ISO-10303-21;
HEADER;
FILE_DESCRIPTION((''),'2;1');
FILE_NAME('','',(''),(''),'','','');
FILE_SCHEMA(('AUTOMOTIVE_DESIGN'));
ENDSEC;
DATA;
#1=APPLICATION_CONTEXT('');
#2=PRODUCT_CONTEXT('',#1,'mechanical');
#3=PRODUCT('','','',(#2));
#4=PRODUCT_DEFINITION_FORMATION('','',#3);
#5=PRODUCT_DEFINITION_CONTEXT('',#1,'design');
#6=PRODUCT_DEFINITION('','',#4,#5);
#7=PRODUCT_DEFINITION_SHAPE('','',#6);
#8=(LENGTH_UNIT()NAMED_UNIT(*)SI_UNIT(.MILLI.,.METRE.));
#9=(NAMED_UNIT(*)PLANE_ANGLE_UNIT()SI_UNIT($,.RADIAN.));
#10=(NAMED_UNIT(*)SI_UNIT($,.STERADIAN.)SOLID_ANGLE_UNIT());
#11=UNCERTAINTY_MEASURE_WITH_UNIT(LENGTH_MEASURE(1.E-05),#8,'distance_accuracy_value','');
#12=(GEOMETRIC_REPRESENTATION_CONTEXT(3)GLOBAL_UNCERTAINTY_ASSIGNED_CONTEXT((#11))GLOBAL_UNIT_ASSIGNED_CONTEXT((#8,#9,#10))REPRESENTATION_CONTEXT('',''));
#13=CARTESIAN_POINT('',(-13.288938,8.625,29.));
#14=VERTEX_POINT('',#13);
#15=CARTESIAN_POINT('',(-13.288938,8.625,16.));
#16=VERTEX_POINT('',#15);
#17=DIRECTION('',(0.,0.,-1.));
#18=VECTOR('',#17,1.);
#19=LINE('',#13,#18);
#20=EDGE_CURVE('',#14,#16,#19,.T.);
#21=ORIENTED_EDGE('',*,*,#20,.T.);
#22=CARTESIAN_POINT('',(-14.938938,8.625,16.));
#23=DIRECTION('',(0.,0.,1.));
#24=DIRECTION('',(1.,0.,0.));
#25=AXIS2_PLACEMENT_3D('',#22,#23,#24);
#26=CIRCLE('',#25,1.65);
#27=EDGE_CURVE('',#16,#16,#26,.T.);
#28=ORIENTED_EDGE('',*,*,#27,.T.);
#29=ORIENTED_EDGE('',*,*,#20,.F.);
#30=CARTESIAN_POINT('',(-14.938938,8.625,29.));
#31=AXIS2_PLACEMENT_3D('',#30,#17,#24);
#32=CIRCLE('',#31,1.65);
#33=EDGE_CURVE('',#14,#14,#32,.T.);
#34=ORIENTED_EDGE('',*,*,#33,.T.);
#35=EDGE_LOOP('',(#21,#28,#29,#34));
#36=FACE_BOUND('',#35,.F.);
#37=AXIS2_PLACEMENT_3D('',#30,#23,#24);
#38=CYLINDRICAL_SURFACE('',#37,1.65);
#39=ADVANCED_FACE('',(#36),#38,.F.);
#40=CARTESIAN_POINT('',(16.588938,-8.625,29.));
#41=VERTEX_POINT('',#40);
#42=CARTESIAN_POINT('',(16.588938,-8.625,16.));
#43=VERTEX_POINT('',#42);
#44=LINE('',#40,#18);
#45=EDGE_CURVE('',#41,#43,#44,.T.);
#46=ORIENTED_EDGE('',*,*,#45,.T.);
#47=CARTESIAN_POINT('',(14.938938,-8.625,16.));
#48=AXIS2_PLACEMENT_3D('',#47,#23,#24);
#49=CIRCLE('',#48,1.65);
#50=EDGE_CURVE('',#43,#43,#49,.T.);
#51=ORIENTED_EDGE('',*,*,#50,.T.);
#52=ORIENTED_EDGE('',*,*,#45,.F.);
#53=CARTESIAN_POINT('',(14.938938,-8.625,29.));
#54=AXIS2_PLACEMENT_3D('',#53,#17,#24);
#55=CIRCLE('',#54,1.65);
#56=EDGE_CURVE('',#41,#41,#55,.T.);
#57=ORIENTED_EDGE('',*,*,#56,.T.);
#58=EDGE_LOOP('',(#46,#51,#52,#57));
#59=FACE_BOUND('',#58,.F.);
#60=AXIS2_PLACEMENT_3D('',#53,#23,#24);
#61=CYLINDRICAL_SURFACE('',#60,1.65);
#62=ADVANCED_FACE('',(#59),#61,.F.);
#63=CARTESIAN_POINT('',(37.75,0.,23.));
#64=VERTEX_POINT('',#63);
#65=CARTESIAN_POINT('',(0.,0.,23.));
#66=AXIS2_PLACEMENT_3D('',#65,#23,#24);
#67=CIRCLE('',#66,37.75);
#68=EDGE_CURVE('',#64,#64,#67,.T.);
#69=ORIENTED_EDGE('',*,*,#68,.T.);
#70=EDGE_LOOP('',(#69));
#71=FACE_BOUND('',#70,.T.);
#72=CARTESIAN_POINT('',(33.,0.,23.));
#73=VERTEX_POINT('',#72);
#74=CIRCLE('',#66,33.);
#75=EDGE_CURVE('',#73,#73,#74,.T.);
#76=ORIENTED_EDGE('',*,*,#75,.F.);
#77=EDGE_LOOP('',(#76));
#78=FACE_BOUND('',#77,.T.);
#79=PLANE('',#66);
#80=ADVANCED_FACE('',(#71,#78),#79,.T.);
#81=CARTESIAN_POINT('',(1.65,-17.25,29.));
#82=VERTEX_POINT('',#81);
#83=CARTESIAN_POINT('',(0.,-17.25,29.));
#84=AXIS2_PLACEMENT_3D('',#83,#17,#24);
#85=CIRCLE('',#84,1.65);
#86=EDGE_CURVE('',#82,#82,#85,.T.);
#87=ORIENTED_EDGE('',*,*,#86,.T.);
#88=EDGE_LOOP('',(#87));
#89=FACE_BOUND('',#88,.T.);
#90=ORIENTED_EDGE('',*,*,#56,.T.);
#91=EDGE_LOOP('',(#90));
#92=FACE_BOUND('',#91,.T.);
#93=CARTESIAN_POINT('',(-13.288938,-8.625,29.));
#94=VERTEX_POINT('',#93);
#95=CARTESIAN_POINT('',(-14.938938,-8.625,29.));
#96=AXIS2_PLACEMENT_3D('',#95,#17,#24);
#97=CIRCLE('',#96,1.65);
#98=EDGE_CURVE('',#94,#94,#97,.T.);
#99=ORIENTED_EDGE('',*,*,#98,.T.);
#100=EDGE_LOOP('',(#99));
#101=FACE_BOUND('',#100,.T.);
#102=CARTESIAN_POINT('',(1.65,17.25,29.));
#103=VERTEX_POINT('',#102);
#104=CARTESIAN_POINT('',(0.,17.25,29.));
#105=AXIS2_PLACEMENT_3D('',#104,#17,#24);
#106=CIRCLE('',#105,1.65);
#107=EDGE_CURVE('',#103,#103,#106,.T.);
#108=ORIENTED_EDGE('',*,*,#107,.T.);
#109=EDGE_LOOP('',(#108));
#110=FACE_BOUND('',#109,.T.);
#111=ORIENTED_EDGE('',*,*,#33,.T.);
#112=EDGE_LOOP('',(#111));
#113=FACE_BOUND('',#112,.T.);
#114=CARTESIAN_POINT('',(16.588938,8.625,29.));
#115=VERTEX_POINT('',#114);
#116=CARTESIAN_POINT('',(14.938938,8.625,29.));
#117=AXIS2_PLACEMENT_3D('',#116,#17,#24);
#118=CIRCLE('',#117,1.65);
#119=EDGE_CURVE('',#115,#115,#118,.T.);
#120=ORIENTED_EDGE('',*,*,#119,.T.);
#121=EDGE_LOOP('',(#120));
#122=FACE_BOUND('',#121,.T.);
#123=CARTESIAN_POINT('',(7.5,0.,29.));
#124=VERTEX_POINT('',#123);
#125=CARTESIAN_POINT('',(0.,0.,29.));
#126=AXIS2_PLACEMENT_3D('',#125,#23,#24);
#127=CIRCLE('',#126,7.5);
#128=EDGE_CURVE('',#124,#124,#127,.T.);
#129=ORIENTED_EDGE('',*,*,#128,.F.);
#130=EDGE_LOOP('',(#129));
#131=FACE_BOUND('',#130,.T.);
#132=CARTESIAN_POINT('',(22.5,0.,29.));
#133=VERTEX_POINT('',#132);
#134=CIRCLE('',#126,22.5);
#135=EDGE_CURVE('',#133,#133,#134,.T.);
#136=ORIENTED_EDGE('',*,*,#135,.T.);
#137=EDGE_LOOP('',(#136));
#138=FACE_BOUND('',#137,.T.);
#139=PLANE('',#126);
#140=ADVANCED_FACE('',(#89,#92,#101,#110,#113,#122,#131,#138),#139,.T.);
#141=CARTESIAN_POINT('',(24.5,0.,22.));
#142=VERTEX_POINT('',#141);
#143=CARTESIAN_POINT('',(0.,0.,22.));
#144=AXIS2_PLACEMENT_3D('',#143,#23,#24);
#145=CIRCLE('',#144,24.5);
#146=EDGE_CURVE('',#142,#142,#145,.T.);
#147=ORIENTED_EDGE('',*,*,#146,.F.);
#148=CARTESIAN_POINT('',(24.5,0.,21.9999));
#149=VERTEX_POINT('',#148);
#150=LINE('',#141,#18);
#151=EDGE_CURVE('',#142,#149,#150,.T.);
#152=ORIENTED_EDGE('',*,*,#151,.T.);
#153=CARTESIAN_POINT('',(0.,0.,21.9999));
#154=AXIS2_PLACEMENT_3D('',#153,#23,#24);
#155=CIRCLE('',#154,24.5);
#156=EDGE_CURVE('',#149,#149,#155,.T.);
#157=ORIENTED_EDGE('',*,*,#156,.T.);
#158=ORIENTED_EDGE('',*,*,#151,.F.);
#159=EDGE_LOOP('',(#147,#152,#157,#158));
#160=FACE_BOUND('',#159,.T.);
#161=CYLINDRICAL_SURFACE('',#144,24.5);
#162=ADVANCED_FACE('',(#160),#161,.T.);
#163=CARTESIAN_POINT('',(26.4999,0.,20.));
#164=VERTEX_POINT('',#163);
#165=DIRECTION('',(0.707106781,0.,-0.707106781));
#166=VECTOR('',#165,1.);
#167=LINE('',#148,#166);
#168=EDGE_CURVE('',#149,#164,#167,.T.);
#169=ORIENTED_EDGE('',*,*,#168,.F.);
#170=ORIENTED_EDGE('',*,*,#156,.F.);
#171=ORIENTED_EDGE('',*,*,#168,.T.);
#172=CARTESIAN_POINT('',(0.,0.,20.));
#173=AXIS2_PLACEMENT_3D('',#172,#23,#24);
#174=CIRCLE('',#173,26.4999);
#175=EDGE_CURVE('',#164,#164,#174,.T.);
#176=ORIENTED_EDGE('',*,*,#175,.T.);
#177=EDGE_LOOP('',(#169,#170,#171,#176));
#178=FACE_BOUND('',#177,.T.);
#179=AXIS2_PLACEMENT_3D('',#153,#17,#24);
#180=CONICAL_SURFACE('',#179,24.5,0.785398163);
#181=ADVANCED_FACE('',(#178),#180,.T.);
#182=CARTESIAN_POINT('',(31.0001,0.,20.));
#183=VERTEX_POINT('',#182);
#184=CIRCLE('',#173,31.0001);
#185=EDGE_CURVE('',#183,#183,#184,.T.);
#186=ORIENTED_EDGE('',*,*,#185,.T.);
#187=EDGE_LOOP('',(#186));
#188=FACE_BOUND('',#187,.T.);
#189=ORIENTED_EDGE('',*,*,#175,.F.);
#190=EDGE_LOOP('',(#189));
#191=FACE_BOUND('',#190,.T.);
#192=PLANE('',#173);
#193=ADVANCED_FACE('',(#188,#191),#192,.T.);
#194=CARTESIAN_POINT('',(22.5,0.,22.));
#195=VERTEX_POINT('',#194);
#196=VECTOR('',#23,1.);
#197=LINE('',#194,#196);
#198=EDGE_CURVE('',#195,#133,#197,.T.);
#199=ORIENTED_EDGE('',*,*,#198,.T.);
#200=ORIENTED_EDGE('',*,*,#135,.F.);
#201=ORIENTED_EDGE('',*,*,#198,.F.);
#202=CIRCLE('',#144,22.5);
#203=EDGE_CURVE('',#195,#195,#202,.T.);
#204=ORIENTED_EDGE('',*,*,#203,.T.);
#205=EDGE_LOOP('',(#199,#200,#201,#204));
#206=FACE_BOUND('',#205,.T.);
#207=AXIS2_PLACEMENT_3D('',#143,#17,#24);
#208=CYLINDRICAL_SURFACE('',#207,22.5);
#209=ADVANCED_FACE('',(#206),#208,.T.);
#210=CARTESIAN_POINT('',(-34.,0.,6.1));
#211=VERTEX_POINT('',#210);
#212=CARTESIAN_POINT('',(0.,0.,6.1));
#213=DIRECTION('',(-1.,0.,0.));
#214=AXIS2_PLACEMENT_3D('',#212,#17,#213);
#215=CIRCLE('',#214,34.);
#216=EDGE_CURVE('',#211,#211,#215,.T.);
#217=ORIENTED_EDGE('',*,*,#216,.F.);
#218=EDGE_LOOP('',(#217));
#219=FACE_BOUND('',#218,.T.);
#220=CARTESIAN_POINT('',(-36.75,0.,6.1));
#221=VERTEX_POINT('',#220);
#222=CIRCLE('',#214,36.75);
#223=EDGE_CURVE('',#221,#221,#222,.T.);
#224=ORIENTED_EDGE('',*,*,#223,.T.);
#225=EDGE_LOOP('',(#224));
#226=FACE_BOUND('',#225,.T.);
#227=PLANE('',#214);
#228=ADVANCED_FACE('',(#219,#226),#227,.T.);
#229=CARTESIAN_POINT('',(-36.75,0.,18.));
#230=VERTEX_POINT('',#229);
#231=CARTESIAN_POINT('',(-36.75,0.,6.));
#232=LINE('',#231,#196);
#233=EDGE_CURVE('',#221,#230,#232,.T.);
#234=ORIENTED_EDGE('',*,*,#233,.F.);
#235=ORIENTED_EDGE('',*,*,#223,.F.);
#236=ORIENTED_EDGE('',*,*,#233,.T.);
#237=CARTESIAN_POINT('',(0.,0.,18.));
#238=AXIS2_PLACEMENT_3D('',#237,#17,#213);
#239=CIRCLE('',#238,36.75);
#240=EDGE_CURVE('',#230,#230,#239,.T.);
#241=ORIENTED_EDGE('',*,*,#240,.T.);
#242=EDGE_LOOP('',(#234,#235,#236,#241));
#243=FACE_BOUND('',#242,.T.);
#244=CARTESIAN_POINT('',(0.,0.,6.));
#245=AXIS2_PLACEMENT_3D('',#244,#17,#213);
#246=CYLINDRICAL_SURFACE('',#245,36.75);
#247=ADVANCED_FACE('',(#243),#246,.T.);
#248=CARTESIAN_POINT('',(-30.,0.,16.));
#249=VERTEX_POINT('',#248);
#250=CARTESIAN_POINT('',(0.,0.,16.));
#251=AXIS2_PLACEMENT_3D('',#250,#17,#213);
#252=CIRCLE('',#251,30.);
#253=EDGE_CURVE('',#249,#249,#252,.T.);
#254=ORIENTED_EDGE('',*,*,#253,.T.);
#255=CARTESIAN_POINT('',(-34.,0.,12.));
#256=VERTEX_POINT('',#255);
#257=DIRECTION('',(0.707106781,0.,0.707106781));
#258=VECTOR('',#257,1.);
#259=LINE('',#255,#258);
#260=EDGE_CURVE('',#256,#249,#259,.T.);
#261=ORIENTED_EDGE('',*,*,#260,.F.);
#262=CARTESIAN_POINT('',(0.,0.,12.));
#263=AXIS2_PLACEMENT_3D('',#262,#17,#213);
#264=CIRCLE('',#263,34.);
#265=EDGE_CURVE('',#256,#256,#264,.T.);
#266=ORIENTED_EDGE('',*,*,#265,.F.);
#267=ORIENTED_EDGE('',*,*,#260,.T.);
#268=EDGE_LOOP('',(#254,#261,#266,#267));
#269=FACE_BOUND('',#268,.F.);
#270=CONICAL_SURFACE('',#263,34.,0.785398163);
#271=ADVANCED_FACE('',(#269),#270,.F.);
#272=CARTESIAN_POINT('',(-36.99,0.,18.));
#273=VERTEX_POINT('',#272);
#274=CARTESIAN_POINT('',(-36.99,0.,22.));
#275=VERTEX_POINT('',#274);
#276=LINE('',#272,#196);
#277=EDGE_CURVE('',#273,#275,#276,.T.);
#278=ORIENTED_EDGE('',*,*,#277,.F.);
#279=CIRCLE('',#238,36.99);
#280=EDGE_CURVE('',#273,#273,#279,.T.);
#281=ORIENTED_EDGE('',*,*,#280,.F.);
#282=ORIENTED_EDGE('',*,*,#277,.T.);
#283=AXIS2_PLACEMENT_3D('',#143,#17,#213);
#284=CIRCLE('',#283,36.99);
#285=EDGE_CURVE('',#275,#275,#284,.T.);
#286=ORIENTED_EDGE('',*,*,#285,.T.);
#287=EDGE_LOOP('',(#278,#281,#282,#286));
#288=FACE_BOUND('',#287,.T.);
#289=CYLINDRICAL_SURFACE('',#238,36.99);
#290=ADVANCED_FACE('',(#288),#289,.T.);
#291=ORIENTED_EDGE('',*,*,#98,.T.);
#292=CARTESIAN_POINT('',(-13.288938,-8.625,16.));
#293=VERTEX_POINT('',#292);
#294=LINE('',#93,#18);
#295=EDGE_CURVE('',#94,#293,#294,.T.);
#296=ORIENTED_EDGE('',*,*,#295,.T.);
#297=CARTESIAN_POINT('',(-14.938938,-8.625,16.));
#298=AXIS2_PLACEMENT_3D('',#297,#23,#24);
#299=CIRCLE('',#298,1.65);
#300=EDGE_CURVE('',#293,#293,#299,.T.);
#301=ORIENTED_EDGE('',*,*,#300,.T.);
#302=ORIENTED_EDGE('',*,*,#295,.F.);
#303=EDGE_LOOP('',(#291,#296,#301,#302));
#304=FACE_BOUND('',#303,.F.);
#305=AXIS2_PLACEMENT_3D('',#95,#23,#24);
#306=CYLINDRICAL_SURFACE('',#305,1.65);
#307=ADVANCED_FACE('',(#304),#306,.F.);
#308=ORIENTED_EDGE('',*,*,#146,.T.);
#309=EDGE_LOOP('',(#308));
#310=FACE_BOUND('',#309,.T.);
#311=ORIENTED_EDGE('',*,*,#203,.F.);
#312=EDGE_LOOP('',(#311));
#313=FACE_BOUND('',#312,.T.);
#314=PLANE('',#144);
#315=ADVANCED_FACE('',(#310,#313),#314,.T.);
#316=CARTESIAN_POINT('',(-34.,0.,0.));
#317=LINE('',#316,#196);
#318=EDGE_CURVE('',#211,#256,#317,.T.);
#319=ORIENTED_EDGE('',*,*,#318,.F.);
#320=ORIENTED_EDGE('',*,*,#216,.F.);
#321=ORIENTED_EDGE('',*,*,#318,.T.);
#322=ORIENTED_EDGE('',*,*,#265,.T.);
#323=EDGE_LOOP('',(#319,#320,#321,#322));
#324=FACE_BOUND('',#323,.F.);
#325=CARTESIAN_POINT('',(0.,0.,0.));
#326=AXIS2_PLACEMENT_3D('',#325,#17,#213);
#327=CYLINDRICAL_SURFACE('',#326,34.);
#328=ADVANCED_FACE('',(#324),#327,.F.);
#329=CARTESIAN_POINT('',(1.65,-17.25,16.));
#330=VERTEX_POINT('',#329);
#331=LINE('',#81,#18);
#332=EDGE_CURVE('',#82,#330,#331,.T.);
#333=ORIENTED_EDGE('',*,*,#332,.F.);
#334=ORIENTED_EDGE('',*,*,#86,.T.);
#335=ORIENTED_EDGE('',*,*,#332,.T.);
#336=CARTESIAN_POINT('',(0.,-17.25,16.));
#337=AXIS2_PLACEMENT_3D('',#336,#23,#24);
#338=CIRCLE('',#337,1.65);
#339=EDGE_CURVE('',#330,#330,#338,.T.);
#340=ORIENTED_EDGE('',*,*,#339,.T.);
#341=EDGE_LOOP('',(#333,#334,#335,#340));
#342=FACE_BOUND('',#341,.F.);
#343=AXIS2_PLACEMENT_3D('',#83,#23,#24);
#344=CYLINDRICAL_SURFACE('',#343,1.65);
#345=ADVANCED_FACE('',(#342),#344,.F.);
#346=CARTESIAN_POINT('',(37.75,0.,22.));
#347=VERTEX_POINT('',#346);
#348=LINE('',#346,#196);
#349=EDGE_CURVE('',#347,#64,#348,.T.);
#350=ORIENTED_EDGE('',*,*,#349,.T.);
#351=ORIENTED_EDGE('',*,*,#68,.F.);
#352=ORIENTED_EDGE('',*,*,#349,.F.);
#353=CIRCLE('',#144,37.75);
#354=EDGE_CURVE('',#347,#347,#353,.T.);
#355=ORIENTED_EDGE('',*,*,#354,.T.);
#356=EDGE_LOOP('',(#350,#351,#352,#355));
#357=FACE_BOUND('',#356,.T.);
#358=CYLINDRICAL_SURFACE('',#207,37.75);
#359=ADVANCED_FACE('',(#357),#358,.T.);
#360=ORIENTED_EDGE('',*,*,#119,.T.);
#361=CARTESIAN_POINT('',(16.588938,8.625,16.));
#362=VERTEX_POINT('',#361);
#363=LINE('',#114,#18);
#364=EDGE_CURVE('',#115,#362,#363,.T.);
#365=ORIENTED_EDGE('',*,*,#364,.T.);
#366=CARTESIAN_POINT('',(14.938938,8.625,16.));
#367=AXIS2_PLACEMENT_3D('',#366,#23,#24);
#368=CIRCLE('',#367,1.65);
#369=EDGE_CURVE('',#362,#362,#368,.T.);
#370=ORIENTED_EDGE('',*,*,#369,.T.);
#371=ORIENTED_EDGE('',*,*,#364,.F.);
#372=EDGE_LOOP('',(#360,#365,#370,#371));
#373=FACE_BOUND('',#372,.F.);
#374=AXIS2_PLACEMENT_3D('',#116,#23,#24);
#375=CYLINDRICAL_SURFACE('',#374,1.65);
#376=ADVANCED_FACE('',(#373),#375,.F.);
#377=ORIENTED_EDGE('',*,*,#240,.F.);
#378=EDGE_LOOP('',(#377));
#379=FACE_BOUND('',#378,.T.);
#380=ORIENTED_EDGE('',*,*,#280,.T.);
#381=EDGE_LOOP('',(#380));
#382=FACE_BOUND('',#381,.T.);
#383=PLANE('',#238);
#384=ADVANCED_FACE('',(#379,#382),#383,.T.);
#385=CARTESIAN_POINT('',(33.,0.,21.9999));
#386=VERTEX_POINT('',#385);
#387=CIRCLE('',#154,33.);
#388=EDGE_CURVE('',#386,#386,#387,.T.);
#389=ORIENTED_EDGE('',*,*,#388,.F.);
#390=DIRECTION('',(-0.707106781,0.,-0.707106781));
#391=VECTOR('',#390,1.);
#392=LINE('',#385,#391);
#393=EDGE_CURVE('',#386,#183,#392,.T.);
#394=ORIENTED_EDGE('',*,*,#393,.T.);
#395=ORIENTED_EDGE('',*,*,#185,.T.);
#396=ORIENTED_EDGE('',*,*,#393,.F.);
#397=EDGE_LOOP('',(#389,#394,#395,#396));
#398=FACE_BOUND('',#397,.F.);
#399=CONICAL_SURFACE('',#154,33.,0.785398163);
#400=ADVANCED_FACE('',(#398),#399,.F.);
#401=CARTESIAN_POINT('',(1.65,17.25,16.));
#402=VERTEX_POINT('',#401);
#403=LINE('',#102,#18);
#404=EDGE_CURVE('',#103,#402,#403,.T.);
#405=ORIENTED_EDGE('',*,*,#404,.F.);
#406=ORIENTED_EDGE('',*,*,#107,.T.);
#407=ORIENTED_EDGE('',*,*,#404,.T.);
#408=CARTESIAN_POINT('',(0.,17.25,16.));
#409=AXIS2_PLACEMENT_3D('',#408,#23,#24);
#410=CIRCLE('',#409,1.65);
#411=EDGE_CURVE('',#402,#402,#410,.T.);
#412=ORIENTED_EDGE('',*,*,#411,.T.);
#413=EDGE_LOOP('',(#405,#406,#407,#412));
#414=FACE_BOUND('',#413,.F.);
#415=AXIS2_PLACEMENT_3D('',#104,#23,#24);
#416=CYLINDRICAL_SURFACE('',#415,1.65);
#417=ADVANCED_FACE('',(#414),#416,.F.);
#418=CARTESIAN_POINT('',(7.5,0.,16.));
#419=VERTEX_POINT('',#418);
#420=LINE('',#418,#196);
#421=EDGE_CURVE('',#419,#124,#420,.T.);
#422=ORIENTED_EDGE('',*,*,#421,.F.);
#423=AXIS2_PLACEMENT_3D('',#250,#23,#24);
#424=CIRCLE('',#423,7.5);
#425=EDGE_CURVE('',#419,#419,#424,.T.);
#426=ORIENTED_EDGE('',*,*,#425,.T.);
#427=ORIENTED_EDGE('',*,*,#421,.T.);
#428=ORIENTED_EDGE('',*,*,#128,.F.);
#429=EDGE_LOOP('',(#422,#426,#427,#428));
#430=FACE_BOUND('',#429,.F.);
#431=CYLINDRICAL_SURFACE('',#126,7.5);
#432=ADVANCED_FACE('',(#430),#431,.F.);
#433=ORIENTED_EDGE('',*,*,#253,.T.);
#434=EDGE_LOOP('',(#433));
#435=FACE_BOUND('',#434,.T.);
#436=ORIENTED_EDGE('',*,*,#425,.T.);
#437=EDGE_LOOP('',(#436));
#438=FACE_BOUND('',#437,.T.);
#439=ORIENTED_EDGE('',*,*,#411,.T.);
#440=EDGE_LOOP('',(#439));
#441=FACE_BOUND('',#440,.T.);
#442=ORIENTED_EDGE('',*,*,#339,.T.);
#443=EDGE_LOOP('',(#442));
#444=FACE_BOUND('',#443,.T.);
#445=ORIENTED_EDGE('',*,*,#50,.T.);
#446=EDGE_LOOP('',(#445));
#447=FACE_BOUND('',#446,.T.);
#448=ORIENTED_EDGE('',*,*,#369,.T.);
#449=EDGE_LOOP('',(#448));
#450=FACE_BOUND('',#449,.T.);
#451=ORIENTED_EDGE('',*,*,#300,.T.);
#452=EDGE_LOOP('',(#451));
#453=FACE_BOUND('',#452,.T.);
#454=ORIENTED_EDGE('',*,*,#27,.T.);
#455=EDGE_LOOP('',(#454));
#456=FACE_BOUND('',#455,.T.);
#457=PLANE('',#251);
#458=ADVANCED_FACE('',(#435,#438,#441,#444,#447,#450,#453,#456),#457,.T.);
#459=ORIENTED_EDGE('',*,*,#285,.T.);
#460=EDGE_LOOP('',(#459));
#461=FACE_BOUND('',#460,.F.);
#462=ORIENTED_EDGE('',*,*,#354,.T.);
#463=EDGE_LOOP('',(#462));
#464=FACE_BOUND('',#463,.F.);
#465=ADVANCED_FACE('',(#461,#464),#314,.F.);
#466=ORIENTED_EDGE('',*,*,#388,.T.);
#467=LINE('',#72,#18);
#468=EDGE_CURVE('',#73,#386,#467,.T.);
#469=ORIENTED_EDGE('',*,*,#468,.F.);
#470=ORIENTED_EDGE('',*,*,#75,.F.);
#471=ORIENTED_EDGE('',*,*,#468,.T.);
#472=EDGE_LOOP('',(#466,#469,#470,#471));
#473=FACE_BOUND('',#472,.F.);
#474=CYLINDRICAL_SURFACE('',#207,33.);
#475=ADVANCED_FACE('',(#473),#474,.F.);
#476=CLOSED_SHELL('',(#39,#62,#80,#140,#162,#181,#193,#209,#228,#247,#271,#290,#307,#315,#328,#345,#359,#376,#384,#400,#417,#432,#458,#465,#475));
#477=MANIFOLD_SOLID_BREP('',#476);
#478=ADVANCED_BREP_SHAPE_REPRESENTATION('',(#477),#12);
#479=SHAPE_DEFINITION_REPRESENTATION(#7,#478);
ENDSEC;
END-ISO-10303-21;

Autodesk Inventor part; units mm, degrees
ref_plane "YZ Plane" through (0, 0, 0) normal (1, 0, 0) x (0, 1, 0)
ref_plane "XZ Plane" through (0, 0, 0) normal (0, 1, 0) x (-1, 0, 0)
ref_plane "XY Plane" through (0, 0, 0) normal (0, 0, 1) x (1, 0, 0)
sketch "Sketch1" plane through (0, 0, 0) normal (0, 0, 1) x (1, 0, 0)
  circle A0 centre (0, 0) radius 37
  dimension "d0" = 74
extrude "Extrusion1" add sketch "Sketch1" along normal blind 22
sketch "Sketch2" plane through (0, 0, 22) normal (0, 0, 1) x (1, 0, 0)
  circle A0 centre (0, 0) radius 22.5
  dimension "d19" = 45
extrude "Extrusion2" add sketch "Sketch2" along normal blind 7
sketch "Sketch7" plane through (0, 0, 22) normal (0, 0, 1) x (1, 0, 0)
  circle A0 centre (0, 0) radius 22.5 projected
  circle A1 centre (0, 0) radius 24.5
  circle A2 centre (0, 0) radius 37 projected
  circle A3 centre (0, 0) radius 33
  dimension "d12" = 2
  dimension "d13" = 4
extrude "Extrusion5" cut sketch "Sketch7" against normal blind 2 contours A3
sketch "Sketch8" plane through (0, 0, 0) normal (0, 0, -1) x (-1, 0, 0)
  circle A0 centre (0, 0) radius 34
  circle A1 centre (0, 0) radius 37 projected
  dimension "d16" = 3
extrude "Extrusion6" cut sketch "Sketch8" against normal blind 16 contours A0
sketch "Sketch9" plane through (0, 0, 29) normal (0, 0, 1) x (1, 0, 0)
  circle A0 centre (0, 0) radius 7.5
  dimension "d20" = 15
extrude "Extrusion7" cut sketch "Sketch9" against normal blind 29
sketch "Sketch10" plane through (0, 0, 29) normal (0, 0, 1) x (1, 0, 0)
  circle A0 centre (0, 0) radius 17.25
  circle A1 centre (0, 17.25) radius 1.65
  circle A2 centre (-14.938938, 8.625) radius 1.65
  circle A3 centre (-14.938938, -8.625) radius 1.65
  circle A4 centre (0, -17.25) radius 1.65
  circle A5 centre (14.938938, -8.625) radius 1.65
  circle A6 centre (14.938938, 8.625) radius 1.65
  dimension "d23" = 34.5
  dimension "d24" = 3.3
  dimension "d27" = 360
extrude "Extrusion8" cut sketch "Sketch10" against normal through all contours A6 A0 | A0 A6 | A5 A0 | A0 A5 | A1 A0 | A0 A1 | A4 A0 | A0 A4 | A2 A0 | A0 A2 | A3 A0 | A0 A3
sketch "Sketch11" plane through (0, 0, 0) normal (0, 0, -1) x (-1, 0, 0)
  circle A0 centre (0, 0) radius 34 projected
  circle A1 centre (0, 0) radius 37 projected
extrude "Extrusion9" cut sketch "Sketch11" against normal blind 6
chamfer "Chamfer1" distance 4 angle 45 1 edges at (34, 0, 16)
sketch "Sketch12" plane through (0, 0, 22) normal (0, 0, 1) x (1, 0, 0)
  circle A0 centre (0, 0) radius 37 projected
  circle A1 centre (0, 0) radius 33 projected
  circle A2 centre (0, 0) radius 7.5 projected
  circle A3 centre (0, 0) radius 37.75
  dimension "d36" = 0.75
extrude "Extrusion10" add sketch "Sketch12" along normal blind 1 contours A0 | A2 | A3
chamfer "Chamfer3" distance 2 angle 45 2 edges at (-33, 0, 20) (-24.5, 0, 20)
sketch "Sketch14" plane through (0, 0, 6) normal (0, 0, -1) x (-1, 0, 0)
  circle A0 centre (0, 0) radius 37 projected
  circle A1 centre (0, 0) radius 34 projected
  circle A2 centre (0, 0) radius 36.75
  dimension "d47" = 0.25
sketch "Sketch14 outline for Extrusion12" plane through (0, 0, 6) normal (0, 0, -1) x (-1, 0, 0)
  circle A0 centre (0, 0) radius 37
  circle A1 centre (0, 0) radius 36.75
extrude "Extrusion12" cut sketch "Sketch14 outline for Extrusion12" against normal blind 12
sketch "Sketch15" plane through (0, 0, 18) normal (0, 0, -1) x (-1, 0, 0)
  circle A0 centre (0, 0) radius 37 projected
  circle A1 centre (0, 0) radius 36.75 projected
  circle A2 centre (0, 0) radius 36.99
  dimension "d50" = 0.01
sketch "Sketch15 outline for Extrusion13" plane through (0, 0, 18) normal (0, 0, -1) x (-1, 0, 0)
  circle A0 centre (0, 0) radius 37
  circle A1 centre (0, 0) radius 36.99
extrude "Extrusion13" cut sketch "Sketch15 outline for Extrusion13" against normal up to surface (4 mm away)
sketch "Sketch16" plane through (0, 0, 6) normal (0, 0, -1) x (-1, 0, 0)
  circle A0 centre (0, 0) radius 36.75 projected
  circle A1 centre (0, 0) radius 34 projected
extrude "Extrusion14" cut sketch "Sketch16" against normal blind 0.1
sketch "Sketch17" plane through (0, 0, 29) normal (0, 0, 1) x (1, 0, 0)
  circle A0 centre (0, 0) radius 7.5 projected
extrude "Extrusion15" cut sketch "Sketch17" against normal through all
properties part number "rotor_hub"
